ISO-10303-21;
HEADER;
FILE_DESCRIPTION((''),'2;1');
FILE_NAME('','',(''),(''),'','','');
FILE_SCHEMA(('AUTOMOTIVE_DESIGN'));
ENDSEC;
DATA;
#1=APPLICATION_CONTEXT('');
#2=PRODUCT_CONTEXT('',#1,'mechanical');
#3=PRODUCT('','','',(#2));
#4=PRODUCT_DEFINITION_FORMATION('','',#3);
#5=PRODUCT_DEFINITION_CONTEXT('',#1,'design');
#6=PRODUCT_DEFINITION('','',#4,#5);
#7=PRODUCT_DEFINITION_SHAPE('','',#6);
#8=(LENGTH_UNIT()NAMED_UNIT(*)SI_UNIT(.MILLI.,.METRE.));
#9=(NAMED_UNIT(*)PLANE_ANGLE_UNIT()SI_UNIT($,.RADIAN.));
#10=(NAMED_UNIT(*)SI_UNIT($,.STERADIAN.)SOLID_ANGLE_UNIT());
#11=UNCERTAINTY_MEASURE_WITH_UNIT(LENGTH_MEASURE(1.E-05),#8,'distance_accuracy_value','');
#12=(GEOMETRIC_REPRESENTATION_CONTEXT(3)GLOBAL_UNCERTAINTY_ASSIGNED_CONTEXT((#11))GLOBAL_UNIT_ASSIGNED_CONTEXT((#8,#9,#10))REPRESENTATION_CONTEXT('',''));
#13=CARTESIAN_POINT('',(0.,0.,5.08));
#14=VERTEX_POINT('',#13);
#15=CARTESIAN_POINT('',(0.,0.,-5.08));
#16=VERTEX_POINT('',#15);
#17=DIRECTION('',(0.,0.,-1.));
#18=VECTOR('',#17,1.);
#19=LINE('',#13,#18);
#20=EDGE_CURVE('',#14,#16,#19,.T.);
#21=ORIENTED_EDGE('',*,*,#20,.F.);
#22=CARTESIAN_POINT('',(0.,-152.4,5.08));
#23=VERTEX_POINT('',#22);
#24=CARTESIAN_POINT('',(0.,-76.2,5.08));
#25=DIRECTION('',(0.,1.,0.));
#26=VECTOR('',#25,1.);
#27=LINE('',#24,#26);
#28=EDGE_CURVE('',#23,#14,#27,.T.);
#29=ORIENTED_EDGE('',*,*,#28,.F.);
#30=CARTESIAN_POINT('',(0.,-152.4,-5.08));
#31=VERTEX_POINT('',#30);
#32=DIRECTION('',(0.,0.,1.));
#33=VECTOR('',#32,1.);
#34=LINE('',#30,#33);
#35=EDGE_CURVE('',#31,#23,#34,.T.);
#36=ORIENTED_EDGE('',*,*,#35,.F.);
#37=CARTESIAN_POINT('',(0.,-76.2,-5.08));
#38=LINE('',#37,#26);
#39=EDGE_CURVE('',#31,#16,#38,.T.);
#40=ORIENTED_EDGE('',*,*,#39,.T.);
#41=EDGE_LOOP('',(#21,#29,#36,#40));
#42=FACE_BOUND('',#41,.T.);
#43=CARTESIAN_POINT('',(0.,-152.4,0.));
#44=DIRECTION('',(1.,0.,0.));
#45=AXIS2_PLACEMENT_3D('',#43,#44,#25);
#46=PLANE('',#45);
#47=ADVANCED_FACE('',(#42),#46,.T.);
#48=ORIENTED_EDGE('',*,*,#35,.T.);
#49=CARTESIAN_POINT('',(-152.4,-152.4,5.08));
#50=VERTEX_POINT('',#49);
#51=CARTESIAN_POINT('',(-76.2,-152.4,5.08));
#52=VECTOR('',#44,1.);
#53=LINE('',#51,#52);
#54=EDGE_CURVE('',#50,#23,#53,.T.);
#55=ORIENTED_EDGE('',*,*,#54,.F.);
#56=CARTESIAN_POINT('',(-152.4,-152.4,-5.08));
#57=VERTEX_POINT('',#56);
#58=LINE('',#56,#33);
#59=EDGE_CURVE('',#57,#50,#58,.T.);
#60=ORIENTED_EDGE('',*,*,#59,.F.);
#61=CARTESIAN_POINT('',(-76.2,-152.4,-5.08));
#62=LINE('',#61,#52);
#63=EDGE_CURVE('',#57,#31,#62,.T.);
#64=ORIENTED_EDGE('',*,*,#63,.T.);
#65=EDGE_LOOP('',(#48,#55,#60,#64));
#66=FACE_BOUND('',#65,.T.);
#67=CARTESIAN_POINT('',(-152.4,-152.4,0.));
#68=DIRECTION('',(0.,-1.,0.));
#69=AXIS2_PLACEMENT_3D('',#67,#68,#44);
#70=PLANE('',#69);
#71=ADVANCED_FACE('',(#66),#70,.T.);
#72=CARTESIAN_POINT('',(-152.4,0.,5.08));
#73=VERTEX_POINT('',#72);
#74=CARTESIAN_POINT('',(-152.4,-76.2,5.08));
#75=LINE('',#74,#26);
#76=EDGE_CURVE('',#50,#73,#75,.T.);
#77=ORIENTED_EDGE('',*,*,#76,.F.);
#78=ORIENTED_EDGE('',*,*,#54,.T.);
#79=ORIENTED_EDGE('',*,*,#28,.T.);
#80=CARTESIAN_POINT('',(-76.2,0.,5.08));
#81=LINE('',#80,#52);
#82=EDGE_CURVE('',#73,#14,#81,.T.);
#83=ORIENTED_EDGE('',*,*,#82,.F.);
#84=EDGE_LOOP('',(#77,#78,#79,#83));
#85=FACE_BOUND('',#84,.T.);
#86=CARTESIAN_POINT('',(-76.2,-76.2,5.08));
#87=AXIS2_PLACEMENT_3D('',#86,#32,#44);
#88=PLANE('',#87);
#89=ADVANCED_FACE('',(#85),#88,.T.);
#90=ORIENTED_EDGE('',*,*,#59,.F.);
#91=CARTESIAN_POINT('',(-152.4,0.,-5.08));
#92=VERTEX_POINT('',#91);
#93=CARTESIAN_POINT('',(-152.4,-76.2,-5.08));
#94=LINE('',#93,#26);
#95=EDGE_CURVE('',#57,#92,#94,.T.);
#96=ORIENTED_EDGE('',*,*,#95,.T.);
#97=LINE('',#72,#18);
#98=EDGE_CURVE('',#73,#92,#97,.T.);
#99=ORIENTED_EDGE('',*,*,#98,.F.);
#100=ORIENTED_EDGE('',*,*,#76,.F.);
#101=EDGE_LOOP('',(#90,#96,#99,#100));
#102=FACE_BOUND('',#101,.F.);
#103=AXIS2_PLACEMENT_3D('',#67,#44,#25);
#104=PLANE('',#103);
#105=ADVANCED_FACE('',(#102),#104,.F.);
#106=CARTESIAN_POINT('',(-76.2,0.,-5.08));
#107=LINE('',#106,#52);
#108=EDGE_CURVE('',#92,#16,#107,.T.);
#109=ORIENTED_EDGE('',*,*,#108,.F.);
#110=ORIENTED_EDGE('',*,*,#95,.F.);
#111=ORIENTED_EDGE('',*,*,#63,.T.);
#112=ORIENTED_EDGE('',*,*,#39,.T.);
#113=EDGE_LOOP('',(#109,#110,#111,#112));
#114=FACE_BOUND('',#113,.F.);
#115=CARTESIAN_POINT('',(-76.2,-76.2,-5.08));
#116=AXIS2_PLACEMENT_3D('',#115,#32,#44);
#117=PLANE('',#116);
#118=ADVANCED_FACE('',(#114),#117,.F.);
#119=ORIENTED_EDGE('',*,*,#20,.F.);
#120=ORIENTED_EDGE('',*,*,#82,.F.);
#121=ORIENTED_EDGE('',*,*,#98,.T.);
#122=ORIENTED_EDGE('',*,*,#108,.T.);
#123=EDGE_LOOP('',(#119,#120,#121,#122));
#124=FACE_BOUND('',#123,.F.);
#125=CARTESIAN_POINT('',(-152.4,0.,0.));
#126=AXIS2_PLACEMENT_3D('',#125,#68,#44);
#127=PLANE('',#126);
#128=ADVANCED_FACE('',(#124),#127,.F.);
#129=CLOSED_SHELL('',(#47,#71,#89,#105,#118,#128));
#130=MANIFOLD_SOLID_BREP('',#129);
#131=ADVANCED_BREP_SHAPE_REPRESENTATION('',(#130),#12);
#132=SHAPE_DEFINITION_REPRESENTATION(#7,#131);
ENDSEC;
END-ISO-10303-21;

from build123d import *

# Parameters (mm, degrees)
F0_W     = 152.4
F0_H     = 152.4
F3_DEPTH = 5.08


# Not quite as in the source:
# - a feature of the source that left no trace in its solid (it failed there, or was rolled back) is left out


with BuildPart() as f3:
    # F0 (on Top) → F3 (new body, symmetric)
    with BuildSketch(Plane.XY):
        with Locations((-76.2, -76.2)):
            Rectangle(F0_W, F0_H)
    extrude(amount=F3_DEPTH, both=True)


solid = f3.part
